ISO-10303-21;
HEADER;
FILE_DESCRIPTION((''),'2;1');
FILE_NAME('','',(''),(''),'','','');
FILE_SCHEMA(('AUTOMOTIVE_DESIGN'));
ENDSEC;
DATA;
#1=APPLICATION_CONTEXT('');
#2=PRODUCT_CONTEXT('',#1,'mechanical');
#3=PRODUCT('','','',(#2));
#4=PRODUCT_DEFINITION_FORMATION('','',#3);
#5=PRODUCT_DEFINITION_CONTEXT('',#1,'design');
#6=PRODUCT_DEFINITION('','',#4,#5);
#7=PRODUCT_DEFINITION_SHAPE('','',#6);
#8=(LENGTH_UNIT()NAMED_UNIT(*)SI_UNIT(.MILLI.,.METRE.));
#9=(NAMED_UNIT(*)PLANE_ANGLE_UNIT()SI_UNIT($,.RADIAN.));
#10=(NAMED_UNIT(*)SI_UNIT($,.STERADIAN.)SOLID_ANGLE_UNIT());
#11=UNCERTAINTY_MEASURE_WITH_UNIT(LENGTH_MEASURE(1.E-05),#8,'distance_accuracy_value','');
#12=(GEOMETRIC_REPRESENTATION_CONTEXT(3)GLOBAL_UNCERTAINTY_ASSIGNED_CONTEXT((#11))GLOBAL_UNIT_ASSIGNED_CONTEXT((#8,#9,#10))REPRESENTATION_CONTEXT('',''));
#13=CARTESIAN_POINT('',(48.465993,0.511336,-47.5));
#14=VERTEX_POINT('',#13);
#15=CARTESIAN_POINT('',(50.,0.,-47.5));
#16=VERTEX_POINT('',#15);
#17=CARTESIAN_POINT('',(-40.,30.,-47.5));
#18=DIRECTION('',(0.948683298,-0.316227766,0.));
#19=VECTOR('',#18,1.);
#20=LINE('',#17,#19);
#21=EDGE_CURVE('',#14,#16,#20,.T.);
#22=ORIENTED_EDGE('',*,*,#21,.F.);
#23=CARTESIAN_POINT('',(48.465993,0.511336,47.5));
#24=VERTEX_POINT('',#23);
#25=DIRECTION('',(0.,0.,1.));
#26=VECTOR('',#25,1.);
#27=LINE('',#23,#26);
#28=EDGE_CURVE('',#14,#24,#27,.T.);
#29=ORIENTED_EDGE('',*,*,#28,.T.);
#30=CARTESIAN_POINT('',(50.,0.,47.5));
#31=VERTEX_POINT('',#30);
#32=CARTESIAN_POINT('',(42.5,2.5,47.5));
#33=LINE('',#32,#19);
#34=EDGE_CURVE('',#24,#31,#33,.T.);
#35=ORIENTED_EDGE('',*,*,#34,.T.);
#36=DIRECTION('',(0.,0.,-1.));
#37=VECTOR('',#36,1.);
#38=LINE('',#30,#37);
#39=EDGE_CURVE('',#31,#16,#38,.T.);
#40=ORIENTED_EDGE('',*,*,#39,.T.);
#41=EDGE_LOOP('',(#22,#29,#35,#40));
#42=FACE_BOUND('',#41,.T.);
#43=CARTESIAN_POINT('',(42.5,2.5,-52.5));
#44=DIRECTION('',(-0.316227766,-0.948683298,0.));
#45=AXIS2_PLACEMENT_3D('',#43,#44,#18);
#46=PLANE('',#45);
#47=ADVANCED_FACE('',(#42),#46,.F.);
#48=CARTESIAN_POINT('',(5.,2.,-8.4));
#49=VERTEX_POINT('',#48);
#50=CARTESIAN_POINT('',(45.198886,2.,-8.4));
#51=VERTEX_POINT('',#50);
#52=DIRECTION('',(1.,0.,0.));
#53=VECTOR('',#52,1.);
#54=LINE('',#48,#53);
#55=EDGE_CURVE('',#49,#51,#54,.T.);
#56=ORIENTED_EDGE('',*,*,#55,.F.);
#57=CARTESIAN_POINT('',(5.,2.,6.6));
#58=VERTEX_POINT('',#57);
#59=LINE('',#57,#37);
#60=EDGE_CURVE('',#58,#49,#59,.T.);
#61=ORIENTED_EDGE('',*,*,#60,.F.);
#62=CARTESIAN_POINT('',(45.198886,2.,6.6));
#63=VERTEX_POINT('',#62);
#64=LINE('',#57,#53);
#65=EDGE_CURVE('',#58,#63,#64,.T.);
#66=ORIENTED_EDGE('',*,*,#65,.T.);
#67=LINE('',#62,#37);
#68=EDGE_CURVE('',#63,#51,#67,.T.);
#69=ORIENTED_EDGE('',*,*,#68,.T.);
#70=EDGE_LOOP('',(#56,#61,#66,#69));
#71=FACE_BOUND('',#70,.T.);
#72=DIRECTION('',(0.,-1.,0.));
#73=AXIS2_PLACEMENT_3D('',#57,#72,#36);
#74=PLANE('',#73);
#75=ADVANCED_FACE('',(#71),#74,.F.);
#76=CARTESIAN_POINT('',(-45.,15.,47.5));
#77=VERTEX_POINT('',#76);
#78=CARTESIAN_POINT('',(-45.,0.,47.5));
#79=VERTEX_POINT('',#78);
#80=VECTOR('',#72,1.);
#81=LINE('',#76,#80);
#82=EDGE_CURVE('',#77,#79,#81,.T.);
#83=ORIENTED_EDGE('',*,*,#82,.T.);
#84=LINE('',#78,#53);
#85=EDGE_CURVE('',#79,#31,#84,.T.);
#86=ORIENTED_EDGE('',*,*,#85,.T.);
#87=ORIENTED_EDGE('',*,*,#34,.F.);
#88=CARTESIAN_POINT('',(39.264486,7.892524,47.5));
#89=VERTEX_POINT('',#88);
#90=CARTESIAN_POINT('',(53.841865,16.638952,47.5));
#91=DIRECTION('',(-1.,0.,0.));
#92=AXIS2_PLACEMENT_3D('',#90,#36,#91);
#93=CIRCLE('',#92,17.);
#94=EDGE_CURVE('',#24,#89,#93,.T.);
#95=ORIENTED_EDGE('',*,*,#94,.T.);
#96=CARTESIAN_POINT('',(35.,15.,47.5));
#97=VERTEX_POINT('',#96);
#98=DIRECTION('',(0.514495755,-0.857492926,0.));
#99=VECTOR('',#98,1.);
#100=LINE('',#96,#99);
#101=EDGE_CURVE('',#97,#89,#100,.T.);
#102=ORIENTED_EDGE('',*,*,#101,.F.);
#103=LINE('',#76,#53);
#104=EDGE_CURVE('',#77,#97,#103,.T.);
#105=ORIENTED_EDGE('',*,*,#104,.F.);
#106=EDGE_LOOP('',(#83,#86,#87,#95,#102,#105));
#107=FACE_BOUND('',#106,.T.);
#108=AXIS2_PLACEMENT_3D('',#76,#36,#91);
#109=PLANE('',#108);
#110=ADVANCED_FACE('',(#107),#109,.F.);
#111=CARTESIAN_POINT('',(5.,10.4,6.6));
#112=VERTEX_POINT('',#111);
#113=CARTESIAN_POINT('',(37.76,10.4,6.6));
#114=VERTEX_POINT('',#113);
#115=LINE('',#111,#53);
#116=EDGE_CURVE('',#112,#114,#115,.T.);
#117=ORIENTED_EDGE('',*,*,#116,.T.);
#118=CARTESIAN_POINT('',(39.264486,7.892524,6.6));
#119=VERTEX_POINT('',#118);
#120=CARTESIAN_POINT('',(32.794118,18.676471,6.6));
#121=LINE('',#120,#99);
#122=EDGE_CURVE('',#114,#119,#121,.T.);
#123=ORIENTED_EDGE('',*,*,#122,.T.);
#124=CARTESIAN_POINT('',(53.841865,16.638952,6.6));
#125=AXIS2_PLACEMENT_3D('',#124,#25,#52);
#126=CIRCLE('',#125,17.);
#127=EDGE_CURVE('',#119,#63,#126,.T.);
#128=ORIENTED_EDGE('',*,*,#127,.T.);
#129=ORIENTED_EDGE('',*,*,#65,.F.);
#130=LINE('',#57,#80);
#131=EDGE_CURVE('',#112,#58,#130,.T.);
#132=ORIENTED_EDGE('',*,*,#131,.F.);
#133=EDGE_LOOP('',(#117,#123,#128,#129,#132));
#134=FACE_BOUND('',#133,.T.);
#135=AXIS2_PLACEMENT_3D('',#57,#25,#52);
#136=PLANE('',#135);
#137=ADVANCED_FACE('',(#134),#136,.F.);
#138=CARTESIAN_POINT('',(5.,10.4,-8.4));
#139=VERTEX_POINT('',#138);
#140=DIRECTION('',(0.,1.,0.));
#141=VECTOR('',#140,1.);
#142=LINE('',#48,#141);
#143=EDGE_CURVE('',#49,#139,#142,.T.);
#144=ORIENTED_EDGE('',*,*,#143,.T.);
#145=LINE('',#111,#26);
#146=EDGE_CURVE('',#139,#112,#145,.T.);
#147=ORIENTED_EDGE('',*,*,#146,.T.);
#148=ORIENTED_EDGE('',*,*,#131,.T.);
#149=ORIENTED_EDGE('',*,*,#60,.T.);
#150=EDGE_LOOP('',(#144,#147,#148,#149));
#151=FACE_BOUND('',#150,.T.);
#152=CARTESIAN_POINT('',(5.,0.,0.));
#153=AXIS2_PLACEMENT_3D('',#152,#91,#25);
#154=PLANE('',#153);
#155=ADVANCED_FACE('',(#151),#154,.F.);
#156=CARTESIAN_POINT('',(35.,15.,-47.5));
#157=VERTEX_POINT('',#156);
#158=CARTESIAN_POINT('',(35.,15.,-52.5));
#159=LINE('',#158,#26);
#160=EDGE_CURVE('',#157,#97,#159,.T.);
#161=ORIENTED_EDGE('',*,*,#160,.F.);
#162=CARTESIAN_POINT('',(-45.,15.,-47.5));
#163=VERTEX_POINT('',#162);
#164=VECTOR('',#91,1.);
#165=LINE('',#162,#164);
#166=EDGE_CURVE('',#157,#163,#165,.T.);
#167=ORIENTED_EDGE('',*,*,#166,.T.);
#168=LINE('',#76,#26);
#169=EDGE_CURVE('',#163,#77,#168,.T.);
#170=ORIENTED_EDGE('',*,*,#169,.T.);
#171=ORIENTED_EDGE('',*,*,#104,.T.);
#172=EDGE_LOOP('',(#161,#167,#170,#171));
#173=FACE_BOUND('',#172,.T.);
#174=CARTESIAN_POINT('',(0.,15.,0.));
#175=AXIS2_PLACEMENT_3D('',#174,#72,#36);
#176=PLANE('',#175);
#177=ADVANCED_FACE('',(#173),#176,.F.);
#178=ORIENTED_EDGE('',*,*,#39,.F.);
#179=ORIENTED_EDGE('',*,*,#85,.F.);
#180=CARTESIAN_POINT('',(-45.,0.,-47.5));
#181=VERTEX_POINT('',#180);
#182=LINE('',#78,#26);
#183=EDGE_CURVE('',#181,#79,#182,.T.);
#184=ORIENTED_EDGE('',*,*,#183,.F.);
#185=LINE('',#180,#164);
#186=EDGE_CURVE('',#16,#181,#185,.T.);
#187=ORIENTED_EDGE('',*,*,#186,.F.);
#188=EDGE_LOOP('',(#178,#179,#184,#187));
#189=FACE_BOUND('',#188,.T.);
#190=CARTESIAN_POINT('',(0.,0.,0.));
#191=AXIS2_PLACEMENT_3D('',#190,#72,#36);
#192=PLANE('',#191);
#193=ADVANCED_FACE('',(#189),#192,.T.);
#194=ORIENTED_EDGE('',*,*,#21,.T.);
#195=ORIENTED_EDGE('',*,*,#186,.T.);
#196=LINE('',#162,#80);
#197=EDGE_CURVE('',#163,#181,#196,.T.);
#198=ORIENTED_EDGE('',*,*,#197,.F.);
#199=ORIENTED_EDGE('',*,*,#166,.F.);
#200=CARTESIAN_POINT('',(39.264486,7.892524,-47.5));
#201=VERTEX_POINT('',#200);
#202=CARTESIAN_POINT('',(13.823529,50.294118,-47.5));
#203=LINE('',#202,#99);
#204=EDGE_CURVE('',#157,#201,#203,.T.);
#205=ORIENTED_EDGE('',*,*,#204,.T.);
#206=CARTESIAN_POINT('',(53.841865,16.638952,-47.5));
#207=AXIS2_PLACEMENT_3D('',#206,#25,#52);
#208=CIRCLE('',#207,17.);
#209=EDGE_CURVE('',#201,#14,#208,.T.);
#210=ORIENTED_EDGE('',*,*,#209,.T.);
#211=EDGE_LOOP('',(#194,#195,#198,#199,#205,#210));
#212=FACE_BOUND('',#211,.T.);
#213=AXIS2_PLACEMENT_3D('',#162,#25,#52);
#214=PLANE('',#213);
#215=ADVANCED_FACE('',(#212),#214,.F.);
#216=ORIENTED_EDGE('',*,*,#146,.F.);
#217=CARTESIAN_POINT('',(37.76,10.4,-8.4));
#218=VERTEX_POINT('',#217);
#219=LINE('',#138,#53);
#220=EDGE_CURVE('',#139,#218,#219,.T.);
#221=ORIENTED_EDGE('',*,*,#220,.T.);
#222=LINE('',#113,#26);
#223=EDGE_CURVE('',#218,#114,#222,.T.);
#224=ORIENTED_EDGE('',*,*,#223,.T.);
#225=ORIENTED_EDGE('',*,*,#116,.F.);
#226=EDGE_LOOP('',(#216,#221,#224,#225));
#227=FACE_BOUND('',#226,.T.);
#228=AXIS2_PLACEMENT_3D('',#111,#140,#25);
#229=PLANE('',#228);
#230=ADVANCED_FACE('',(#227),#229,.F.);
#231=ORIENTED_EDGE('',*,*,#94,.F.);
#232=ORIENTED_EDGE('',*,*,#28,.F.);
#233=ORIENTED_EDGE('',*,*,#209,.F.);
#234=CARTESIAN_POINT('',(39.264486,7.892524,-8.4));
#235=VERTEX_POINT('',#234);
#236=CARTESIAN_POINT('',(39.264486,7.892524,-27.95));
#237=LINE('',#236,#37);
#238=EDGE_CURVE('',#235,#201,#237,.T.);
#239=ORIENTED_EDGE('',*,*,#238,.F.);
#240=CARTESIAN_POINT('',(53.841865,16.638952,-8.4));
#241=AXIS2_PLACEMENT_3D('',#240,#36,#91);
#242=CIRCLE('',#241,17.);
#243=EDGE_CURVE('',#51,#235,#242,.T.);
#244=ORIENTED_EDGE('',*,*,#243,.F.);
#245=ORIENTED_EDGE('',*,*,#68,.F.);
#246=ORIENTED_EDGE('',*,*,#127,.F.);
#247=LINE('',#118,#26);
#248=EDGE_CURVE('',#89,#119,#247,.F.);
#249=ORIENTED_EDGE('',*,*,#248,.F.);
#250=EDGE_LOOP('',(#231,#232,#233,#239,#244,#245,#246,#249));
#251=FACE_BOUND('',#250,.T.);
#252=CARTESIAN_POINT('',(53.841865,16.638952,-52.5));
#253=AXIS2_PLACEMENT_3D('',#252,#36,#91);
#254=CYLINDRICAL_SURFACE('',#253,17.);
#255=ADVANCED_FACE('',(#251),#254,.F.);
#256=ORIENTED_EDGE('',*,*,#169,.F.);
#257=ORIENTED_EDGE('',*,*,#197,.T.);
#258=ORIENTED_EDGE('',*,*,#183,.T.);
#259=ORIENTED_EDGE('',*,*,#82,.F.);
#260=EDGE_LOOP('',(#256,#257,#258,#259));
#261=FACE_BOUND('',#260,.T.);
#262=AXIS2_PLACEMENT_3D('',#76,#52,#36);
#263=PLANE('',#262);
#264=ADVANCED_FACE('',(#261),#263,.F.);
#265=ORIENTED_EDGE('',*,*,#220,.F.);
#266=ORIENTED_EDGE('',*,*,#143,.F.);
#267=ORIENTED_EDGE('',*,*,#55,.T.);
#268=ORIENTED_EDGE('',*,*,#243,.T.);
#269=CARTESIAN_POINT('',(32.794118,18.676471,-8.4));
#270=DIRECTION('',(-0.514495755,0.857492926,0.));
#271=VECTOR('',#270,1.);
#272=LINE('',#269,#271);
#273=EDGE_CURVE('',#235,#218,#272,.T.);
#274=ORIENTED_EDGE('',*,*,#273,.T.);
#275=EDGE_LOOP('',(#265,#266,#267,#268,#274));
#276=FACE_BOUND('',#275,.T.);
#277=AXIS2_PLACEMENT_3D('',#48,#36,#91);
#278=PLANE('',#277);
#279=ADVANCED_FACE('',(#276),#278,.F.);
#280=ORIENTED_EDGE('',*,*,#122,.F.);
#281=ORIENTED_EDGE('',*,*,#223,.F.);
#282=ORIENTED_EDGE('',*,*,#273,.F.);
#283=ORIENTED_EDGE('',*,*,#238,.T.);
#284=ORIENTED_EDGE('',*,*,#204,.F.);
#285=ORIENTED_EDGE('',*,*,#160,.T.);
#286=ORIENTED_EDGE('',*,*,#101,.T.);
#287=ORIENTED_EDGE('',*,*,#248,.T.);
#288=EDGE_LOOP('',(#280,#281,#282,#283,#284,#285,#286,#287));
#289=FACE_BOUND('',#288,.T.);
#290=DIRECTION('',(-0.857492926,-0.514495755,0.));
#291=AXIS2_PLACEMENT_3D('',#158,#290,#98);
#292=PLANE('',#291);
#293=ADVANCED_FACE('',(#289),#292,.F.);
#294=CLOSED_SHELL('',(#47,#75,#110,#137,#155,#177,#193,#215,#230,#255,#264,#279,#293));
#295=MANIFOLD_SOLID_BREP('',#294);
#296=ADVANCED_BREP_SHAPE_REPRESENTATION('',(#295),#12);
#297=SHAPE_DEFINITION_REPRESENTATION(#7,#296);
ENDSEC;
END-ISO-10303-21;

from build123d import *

# Parameters (mm, degrees)
SKETCH1_W           = 90
SKETCH1_H           = 95
BOSS_EXTRUDE3_DEPTH = 15
SKETCH5_W           = 15
SKETCH5_H           = 8.4
CUT_EXTRUDE3_DEPTH  = 40
SKETCH7_W           = 95
SKETCH7_H           = 15
BOSS_EXTRUDE4_DEPTH = 5
CUT_EXTRUDE4_DEPTH  = 100
FILLET6_R           = 17


with BuildPart() as part:
    # Sketch1 → Boss-Extrude3 (new body)
    with BuildSketch(Plane(origin=(0, 0, 0), x_dir=(1, 0, 0), z_dir=(0, 1, 0))):
        Rectangle(SKETCH1_W, SKETCH1_H)
    extrude(amount=BOSS_EXTRUDE3_DEPTH)

    # Sketch5 → Cut-Extrude3 (cut)
    with BuildSketch(Plane(origin=(45, 0, 0), x_dir=(0, 0, -1), z_dir=(1, 0, 0))):
        with Locations((0.9, 6.2)):
            Rectangle(SKETCH5_W, SKETCH5_H)
    extrude(amount=-CUT_EXTRUDE3_DEPTH, mode=Mode.SUBTRACT)

    # Sketch7 → Boss-Extrude4 (add)
    with BuildSketch(Plane(origin=(45, 0, 0), x_dir=(0, 0, -1), z_dir=(1, 0, 0))):
        with Locations((0, 7.5)):
            Rectangle(SKETCH7_W, SKETCH7_H)
    extrude(amount=BOSS_EXTRUDE4_DEPTH)

    # Sketch8 → Cut-Extrude4 (cut)
    with BuildSketch(Plane.XY.offset(47.5)):
        Polygon((42.5, 2.5), (50, 0), (50, 15), (35, 15), align=None)
    extrude(amount=-CUT_EXTRUDE4_DEPTH, mode=Mode.SUBTRACT)

    # Fillet6
    # the kernel refuses this fillet: 17 mm, written as the material it adds along each edge
    with BuildSketch(Plane(origin=(42.5, 2.5, 7.321773239), x_dir=(0.9486832980505139, -0.316227766016838, 0), z_dir=(0, 0, -1))) as fillet6_piece_1_section:
        with BuildLine():
            CenterArc((FILLET6_R * 0.369924076215, -FILLET6_R), FILLET6_R, 90, 40.601294645)
            Line((-FILLET6_R * 0.28086729724, -FILLET6_R * 0.240743397635), (0, 0))
            Line((0, 0), (FILLET6_R * 0.369924076215, 0))
        make_face()
    fillet6_piece_1 = extrude(amount=54.821773239, mode=Mode.PRIVATE)
    fillet6_piece_1 = split(fillet6_piece_1, bisect_by=Plane(origin=(45.830299546, 2, 6.96088662), z_dir=(0, -1, 0)), keep=Keep.TOP, mode=Mode.PRIVATE)
    fillet6_piece_1 = split(fillet6_piece_1, bisect_by=Plane(origin=(45.830299546, 1.289116615, 6.6), z_dir=(0, 0, 1)), keep=Keep.TOP, mode=Mode.PRIVATE)
    add(fillet6_piece_1)
    with BuildSketch(Plane(origin=(42.5, 2.5, 7.321773239), x_dir=(0.9486832980505139, -0.316227766016838, 0), z_dir=(0, 0, -1))) as fillet6_piece_2_section:
        with BuildLine():
            CenterArc((FILLET6_R * 0.369924076215, -FILLET6_R), FILLET6_R, 90, 40.601294645)
            Line((-FILLET6_R * 0.28086729724, -FILLET6_R * 0.240743397635), (0, 0))
            Line((0, 0), (FILLET6_R * 0.369924076215, 0))
        make_face()
    fillet6_piece_2 = extrude(amount=54.821773239, mode=Mode.PRIVATE)
    fillet6_piece_2 = split(fillet6_piece_2, bisect_by=Plane(origin=(42.01228151, 2, 6.96088662), z_dir=(0, 1, 0)), keep=Keep.TOP, mode=Mode.PRIVATE)
    fillet6_piece_2 = split(fillet6_piece_2, bisect_by=Plane(origin=(42.01228151, 3.937960854, 6.6), z_dir=(0, 0, 1)), keep=Keep.TOP, mode=Mode.PRIVATE)
    add(fillet6_piece_2)
    with BuildSketch(Plane(origin=(42.5, 2.5, 7.321773239), x_dir=(0.9486832980505139, -0.316227766016838, 0), z_dir=(0, 0, -1))) as fillet6_piece_3_section:
        with BuildLine():
            CenterArc((FILLET6_R * 0.369924076215, -FILLET6_R), FILLET6_R, 90, 40.601294645)
            Line((-FILLET6_R * 0.28086729724, -FILLET6_R * 0.240743397635), (0, 0))
            Line((0, 0), (FILLET6_R * 0.369924076215, 0))
        make_face()
    fillet6_piece_3 = extrude(amount=54.821773239, mode=Mode.PRIVATE)
    fillet6_piece_3 = split(fillet6_piece_3, bisect_by=Plane(origin=(45.830299546, 1.289116615, -8.4), z_dir=(0, 0, 1)), keep=Keep.TOP, mode=Mode.PRIVATE)
    fillet6_piece_3 = split(fillet6_piece_3, bisect_by=Plane(origin=(45.830299546, 2, -0.9), z_dir=(0, -1, 0)), keep=Keep.TOP, mode=Mode.PRIVATE)
    fillet6_piece_3 = split(fillet6_piece_3, bisect_by=Plane(origin=(45.830299546, 1.289116615, 6.6), z_dir=(0, 0, -1)), keep=Keep.TOP, mode=Mode.PRIVATE)
    add(fillet6_piece_3)
    with BuildSketch(Plane(origin=(42.5, 2.5, -8.4), x_dir=(0.9486832980505139, -0.316227766016838, 0), z_dir=(0, 0, -1))) as fillet6_piece_4_section:
        with BuildLine():
            CenterArc((FILLET6_R * 0.369924076215, -FILLET6_R), FILLET6_R, 90, 40.601294645)
            Line((-FILLET6_R * 0.28086729724, -FILLET6_R * 0.240743397635), (0, 0))
            Line((0, 0), (FILLET6_R * 0.369924076215, 0))
        make_face()
    fillet6_piece_4 = extrude(amount=39.1, mode=Mode.PRIVATE)
    fillet6_piece_4 = split(fillet6_piece_4, bisect_by=Plane(origin=(45.830299546, 2, -27.95), z_dir=(0, -1, 0)), keep=Keep.TOP, mode=Mode.PRIVATE)
    add(fillet6_piece_4)
    with BuildSketch(Plane(origin=(42.5, 2.5, -8.4), x_dir=(0.9486832980505139, -0.316227766016838, 0), z_dir=(0, 0, -1))) as fillet6_piece_5_section:
        with BuildLine():
            CenterArc((FILLET6_R * 0.369924076215, -FILLET6_R), FILLET6_R, 90, 40.601294645)
            Line((-FILLET6_R * 0.28086729724, -FILLET6_R * 0.240743397635), (0, 0))
            Line((0, 0), (FILLET6_R * 0.369924076215, 0))
        make_face()
    fillet6_piece_5 = extrude(amount=39.1, mode=Mode.PRIVATE)
    fillet6_piece_5 = split(fillet6_piece_5, bisect_by=Plane(origin=(42.01228151, 2, -27.95), z_dir=(0, 1, 0)), keep=Keep.TOP, mode=Mode.PRIVATE)
    add(fillet6_piece_5)
    with BuildSketch(Plane(origin=(42.5, 2.5, 47.5), x_dir=(0.9486832980505139, -0.316227766016838, 0), z_dir=(0, 0, -1))) as fillet6_piece_6_section:
        with BuildLine():
            CenterArc((FILLET6_R * 0.369924076215, -FILLET6_R), FILLET6_R, 90, 40.601294645)
            Line((-FILLET6_R * 0.28086729724, -FILLET6_R * 0.240743397635), (0, 0))
            Line((0, 0), (FILLET6_R * 0.369924076215, 0))
        make_face()
    fillet6_piece_6 = extrude(amount=40.9, mode=Mode.PRIVATE)
    fillet6_piece_6 = split(fillet6_piece_6, bisect_by=Plane(origin=(45.830299546, 2, 27.05), z_dir=(0, -1, 0)), keep=Keep.TOP, mode=Mode.PRIVATE)
    add(fillet6_piece_6)
    with BuildSketch(Plane(origin=(42.5, 2.5, 47.5), x_dir=(0.9486832980505139, -0.316227766016838, 0), z_dir=(0, 0, -1))) as fillet6_piece_7_section:
        with BuildLine():
            CenterArc((FILLET6_R * 0.369924076215, -FILLET6_R), FILLET6_R, 90, 40.601294645)
            Line((-FILLET6_R * 0.28086729724, -FILLET6_R * 0.240743397635), (0, 0))
            Line((0, 0), (FILLET6_R * 0.369924076215, 0))
        make_face()
    fillet6_piece_7 = extrude(amount=40.9, mode=Mode.PRIVATE)
    fillet6_piece_7 = split(fillet6_piece_7, bisect_by=Plane(origin=(42.01228151, 2, 27.05), z_dir=(0, 1, 0)), keep=Keep.TOP, mode=Mode.PRIVATE)
    add(fillet6_piece_7)
    with BuildSketch(Plane(origin=(42.5, 2.5, 47.5), x_dir=(0.9486832980505139, -0.316227766016838, 0), z_dir=(0, 0, -1))) as fillet6_piece_8_section:
        with BuildLine():
            CenterArc((FILLET6_R * 0.369924076215, -FILLET6_R), FILLET6_R, 90, 40.601294645)
            Line((-FILLET6_R * 0.28086729724, -FILLET6_R * 0.240743397635), (0, 0))
            Line((0, 0), (FILLET6_R * 0.369924076215, 0))
        make_face()
    fillet6_piece_8 = extrude(amount=56.621773239, mode=Mode.PRIVATE)
    fillet6_piece_8 = split(fillet6_piece_8, bisect_by=Plane(origin=(45.830299546, 1.289116615, -8.4), z_dir=(0, 0, 1)), keep=Keep.TOP, mode=Mode.PRIVATE)
    fillet6_piece_8 = split(fillet6_piece_8, bisect_by=Plane(origin=(45.830299546, 2, -0.9), z_dir=(0, -1, 0)), keep=Keep.TOP, mode=Mode.PRIVATE)
    fillet6_piece_8 = split(fillet6_piece_8, bisect_by=Plane(origin=(45.830299546, 1.289116615, 6.6), z_dir=(0, 0, -1)), keep=Keep.TOP, mode=Mode.PRIVATE)
    add(fillet6_piece_8)
    with BuildSketch(Plane(origin=(42.5, 2.5, 47.5), x_dir=(0.9486832980505139, -0.316227766016838, 0), z_dir=(0, 0, -1))) as fillet6_piece_9_section:
        with BuildLine():
            CenterArc((FILLET6_R * 0.369924076215, -FILLET6_R), FILLET6_R, 90, 40.601294645)
            Line((-FILLET6_R * 0.28086729724, -FILLET6_R * 0.240743397635), (0, 0))
            Line((0, 0), (FILLET6_R * 0.369924076215, 0))
        make_face()
    fillet6_piece_9 = extrude(amount=56.621773239, mode=Mode.PRIVATE)
    fillet6_piece_9 = split(fillet6_piece_9, bisect_by=Plane(origin=(45.830299546, 1.289116615, -8.4), z_dir=(0, 0, -1)), keep=Keep.TOP, mode=Mode.PRIVATE)
    fillet6_piece_9 = split(fillet6_piece_9, bisect_by=Plane(origin=(45.830299546, 2, -8.76088662), z_dir=(0, -1, 0)), keep=Keep.TOP, mode=Mode.PRIVATE)
    add(fillet6_piece_9)
    with BuildSketch(Plane(origin=(42.5, 2.5, 47.5), x_dir=(0.9486832980505139, -0.316227766016838, 0), z_dir=(0, 0, -1))) as fillet6_piece_10_section:
        with BuildLine():
            CenterArc((FILLET6_R * 0.369924076215, -FILLET6_R), FILLET6_R, 90, 40.601294645)
            Line((-FILLET6_R * 0.28086729724, -FILLET6_R * 0.240743397635), (0, 0))
            Line((0, 0), (FILLET6_R * 0.369924076215, 0))
        make_face()
    fillet6_piece_10 = extrude(amount=56.621773239, mode=Mode.PRIVATE)
    fillet6_piece_10 = split(fillet6_piece_10, bisect_by=Plane(origin=(42.01228151, 3.937960854, -8.4), z_dir=(0, 0, -1)), keep=Keep.TOP, mode=Mode.PRIVATE)
    fillet6_piece_10 = split(fillet6_piece_10, bisect_by=Plane(origin=(42.01228151, 2, -8.76088662), z_dir=(0, 1, 0)), keep=Keep.TOP, mode=Mode.PRIVATE)
    add(fillet6_piece_10)


solid = part.part
